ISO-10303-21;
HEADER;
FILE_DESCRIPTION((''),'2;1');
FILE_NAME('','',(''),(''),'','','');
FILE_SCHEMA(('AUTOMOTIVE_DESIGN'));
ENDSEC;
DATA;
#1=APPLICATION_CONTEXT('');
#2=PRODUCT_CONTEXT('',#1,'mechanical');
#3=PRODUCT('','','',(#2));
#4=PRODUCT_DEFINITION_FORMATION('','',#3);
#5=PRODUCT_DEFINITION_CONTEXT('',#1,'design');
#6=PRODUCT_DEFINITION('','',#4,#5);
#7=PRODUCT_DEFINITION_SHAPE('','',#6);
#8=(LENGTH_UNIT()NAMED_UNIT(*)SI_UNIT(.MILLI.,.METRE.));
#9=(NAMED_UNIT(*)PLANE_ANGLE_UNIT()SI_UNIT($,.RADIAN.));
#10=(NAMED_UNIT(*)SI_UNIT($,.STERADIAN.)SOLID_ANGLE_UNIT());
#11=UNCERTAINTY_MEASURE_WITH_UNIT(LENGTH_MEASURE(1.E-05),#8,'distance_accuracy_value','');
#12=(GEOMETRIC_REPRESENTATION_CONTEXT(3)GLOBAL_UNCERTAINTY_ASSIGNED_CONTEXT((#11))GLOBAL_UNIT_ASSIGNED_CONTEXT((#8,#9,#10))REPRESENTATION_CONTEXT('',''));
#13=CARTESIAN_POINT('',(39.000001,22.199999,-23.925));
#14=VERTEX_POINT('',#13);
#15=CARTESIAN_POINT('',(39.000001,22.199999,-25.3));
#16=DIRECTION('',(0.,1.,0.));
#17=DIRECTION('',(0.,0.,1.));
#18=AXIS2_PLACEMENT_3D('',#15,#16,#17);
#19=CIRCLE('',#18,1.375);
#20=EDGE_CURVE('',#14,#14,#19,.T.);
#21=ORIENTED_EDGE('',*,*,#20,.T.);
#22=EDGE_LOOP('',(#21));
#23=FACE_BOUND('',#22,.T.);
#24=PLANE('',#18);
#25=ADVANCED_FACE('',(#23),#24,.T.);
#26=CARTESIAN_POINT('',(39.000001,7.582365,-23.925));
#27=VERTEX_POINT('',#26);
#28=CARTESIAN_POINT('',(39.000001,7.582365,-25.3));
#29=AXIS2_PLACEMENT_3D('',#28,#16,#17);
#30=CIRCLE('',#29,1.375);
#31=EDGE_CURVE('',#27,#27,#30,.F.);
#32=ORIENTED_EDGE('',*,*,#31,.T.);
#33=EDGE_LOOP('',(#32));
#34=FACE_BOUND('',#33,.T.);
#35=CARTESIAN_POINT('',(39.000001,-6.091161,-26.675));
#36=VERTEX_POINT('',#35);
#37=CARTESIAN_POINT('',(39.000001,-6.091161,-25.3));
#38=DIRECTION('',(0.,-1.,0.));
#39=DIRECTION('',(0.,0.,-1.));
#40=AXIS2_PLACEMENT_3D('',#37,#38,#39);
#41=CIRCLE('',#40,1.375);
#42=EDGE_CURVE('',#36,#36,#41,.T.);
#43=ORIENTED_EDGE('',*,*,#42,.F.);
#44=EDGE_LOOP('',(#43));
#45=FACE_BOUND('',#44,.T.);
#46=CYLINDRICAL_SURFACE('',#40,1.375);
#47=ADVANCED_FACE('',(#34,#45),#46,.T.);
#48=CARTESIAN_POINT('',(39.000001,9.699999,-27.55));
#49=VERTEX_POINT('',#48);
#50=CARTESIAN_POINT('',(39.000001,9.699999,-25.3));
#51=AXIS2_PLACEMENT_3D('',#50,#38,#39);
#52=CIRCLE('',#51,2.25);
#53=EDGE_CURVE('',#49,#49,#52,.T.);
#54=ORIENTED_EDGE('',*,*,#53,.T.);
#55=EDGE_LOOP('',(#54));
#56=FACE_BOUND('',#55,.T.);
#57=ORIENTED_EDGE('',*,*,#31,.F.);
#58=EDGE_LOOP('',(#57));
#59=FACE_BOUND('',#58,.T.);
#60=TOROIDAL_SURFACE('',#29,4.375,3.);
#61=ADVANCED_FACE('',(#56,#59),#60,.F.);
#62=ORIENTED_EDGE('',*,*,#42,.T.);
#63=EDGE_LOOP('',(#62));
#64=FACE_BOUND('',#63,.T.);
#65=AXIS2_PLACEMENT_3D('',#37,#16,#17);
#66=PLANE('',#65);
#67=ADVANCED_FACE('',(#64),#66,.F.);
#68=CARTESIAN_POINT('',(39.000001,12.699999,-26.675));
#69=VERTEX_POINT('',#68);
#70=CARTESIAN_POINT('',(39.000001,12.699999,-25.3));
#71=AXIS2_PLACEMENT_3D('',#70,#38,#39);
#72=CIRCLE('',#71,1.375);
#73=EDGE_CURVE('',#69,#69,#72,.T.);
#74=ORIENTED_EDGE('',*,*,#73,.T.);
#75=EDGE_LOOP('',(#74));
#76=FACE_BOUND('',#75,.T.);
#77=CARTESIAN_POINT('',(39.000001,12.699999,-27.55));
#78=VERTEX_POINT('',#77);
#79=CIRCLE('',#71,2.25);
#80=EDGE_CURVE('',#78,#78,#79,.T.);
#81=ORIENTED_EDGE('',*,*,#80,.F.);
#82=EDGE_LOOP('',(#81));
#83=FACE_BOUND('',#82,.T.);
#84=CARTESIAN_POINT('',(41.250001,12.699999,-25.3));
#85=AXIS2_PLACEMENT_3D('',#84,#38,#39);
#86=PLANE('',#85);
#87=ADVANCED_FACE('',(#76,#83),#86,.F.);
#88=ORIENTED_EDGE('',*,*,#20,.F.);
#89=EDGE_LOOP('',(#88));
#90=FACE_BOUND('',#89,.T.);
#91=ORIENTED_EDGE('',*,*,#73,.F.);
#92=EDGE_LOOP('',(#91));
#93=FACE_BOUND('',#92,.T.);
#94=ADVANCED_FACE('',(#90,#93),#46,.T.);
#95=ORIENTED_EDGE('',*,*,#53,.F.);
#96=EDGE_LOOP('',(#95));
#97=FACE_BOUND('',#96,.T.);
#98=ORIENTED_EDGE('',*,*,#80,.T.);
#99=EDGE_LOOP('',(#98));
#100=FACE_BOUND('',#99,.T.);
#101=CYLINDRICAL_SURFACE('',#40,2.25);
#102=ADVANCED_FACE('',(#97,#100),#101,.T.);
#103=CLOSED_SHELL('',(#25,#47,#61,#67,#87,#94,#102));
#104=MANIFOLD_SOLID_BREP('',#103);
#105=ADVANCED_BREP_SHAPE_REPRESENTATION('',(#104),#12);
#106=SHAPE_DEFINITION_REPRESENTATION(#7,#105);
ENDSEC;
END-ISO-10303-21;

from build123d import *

# Parameters (mm, degrees)
FILLET_1_R      = 3
SKETCH_3_R      = 1.375
EXTRUDE_2_DEPTH = 2.5


with BuildPart() as part:
    # Эскиз1 → Повернуть1 (revolve)
    with BuildSketch(Plane(origin=(0, 0, -25.3000002), x_dir=(-1, 0, 0), z_dir=(0, 0, -1)), mode=Mode.PRIVATE) as revolve_1_sk:
        Polygon((-39.00000074, -6.09116098), (-39.00000074, 19.69999898), (-40.37500074, 19.69999898), (-40.37500074, 12.69999898), (-41.25000074, 12.69999898), (-41.25000074, 9.69999898), (-40.37500074, 9.69999898), (-40.37500074, -6.09116098), align=None)
    revolve(revolve_1_sk.sketch.rotate(Axis((39.00000074, -6.09116098, -25.3000002), (0, 1, 0)), 90), axis=Axis((39.00000074, -6.09116098, -25.3000002), (0, 1, 0)))

    # Скругление1
    # the kernel refuses this fillet: 3 mm, written as the material it adds along each edge
    with BuildSketch(Plane(origin=(39.00000074, 9.69999898, -25.3000002), x_dir=(0, 0, -1), z_dir=(1, 0, 0))) as fillet_1_piece_1:
        with BuildLine():
            CenterArc((4.375, -2.117634293), FILLET_1_R, 135.099472039, 44.900527961)
            Line((1.375, -2.117634293), (1.315, -2.117634293))
            Line((1.315, -2.117634293), (1.315, 0))
            Line((1.315, 0), (1.375, 0.06))
            ThreePointArc((1.375, 0.06), (1.8125, 0.06), (2.2075, 0.042352686))
            Line((2.2075, 0.042352686), (2.25, 0))
        make_face()
    revolve(axis=Axis((39.00000074, 9.69999898, -25.3000002), (0, 1, 0)))

    # Эскиз3 → Бобышка-Вытянуть2 (add)
    with BuildSketch(Plane(origin=(0, 19.69999898, 0), x_dir=(1, 0, 0), z_dir=(0, 1, 0))):
        with Locations(Location((39.00000074, 25.3000002, 0), (0, 0, 90))):
            Circle(SKETCH_3_R)
    extrude(amount=EXTRUDE_2_DEPTH)


solid = part.part
